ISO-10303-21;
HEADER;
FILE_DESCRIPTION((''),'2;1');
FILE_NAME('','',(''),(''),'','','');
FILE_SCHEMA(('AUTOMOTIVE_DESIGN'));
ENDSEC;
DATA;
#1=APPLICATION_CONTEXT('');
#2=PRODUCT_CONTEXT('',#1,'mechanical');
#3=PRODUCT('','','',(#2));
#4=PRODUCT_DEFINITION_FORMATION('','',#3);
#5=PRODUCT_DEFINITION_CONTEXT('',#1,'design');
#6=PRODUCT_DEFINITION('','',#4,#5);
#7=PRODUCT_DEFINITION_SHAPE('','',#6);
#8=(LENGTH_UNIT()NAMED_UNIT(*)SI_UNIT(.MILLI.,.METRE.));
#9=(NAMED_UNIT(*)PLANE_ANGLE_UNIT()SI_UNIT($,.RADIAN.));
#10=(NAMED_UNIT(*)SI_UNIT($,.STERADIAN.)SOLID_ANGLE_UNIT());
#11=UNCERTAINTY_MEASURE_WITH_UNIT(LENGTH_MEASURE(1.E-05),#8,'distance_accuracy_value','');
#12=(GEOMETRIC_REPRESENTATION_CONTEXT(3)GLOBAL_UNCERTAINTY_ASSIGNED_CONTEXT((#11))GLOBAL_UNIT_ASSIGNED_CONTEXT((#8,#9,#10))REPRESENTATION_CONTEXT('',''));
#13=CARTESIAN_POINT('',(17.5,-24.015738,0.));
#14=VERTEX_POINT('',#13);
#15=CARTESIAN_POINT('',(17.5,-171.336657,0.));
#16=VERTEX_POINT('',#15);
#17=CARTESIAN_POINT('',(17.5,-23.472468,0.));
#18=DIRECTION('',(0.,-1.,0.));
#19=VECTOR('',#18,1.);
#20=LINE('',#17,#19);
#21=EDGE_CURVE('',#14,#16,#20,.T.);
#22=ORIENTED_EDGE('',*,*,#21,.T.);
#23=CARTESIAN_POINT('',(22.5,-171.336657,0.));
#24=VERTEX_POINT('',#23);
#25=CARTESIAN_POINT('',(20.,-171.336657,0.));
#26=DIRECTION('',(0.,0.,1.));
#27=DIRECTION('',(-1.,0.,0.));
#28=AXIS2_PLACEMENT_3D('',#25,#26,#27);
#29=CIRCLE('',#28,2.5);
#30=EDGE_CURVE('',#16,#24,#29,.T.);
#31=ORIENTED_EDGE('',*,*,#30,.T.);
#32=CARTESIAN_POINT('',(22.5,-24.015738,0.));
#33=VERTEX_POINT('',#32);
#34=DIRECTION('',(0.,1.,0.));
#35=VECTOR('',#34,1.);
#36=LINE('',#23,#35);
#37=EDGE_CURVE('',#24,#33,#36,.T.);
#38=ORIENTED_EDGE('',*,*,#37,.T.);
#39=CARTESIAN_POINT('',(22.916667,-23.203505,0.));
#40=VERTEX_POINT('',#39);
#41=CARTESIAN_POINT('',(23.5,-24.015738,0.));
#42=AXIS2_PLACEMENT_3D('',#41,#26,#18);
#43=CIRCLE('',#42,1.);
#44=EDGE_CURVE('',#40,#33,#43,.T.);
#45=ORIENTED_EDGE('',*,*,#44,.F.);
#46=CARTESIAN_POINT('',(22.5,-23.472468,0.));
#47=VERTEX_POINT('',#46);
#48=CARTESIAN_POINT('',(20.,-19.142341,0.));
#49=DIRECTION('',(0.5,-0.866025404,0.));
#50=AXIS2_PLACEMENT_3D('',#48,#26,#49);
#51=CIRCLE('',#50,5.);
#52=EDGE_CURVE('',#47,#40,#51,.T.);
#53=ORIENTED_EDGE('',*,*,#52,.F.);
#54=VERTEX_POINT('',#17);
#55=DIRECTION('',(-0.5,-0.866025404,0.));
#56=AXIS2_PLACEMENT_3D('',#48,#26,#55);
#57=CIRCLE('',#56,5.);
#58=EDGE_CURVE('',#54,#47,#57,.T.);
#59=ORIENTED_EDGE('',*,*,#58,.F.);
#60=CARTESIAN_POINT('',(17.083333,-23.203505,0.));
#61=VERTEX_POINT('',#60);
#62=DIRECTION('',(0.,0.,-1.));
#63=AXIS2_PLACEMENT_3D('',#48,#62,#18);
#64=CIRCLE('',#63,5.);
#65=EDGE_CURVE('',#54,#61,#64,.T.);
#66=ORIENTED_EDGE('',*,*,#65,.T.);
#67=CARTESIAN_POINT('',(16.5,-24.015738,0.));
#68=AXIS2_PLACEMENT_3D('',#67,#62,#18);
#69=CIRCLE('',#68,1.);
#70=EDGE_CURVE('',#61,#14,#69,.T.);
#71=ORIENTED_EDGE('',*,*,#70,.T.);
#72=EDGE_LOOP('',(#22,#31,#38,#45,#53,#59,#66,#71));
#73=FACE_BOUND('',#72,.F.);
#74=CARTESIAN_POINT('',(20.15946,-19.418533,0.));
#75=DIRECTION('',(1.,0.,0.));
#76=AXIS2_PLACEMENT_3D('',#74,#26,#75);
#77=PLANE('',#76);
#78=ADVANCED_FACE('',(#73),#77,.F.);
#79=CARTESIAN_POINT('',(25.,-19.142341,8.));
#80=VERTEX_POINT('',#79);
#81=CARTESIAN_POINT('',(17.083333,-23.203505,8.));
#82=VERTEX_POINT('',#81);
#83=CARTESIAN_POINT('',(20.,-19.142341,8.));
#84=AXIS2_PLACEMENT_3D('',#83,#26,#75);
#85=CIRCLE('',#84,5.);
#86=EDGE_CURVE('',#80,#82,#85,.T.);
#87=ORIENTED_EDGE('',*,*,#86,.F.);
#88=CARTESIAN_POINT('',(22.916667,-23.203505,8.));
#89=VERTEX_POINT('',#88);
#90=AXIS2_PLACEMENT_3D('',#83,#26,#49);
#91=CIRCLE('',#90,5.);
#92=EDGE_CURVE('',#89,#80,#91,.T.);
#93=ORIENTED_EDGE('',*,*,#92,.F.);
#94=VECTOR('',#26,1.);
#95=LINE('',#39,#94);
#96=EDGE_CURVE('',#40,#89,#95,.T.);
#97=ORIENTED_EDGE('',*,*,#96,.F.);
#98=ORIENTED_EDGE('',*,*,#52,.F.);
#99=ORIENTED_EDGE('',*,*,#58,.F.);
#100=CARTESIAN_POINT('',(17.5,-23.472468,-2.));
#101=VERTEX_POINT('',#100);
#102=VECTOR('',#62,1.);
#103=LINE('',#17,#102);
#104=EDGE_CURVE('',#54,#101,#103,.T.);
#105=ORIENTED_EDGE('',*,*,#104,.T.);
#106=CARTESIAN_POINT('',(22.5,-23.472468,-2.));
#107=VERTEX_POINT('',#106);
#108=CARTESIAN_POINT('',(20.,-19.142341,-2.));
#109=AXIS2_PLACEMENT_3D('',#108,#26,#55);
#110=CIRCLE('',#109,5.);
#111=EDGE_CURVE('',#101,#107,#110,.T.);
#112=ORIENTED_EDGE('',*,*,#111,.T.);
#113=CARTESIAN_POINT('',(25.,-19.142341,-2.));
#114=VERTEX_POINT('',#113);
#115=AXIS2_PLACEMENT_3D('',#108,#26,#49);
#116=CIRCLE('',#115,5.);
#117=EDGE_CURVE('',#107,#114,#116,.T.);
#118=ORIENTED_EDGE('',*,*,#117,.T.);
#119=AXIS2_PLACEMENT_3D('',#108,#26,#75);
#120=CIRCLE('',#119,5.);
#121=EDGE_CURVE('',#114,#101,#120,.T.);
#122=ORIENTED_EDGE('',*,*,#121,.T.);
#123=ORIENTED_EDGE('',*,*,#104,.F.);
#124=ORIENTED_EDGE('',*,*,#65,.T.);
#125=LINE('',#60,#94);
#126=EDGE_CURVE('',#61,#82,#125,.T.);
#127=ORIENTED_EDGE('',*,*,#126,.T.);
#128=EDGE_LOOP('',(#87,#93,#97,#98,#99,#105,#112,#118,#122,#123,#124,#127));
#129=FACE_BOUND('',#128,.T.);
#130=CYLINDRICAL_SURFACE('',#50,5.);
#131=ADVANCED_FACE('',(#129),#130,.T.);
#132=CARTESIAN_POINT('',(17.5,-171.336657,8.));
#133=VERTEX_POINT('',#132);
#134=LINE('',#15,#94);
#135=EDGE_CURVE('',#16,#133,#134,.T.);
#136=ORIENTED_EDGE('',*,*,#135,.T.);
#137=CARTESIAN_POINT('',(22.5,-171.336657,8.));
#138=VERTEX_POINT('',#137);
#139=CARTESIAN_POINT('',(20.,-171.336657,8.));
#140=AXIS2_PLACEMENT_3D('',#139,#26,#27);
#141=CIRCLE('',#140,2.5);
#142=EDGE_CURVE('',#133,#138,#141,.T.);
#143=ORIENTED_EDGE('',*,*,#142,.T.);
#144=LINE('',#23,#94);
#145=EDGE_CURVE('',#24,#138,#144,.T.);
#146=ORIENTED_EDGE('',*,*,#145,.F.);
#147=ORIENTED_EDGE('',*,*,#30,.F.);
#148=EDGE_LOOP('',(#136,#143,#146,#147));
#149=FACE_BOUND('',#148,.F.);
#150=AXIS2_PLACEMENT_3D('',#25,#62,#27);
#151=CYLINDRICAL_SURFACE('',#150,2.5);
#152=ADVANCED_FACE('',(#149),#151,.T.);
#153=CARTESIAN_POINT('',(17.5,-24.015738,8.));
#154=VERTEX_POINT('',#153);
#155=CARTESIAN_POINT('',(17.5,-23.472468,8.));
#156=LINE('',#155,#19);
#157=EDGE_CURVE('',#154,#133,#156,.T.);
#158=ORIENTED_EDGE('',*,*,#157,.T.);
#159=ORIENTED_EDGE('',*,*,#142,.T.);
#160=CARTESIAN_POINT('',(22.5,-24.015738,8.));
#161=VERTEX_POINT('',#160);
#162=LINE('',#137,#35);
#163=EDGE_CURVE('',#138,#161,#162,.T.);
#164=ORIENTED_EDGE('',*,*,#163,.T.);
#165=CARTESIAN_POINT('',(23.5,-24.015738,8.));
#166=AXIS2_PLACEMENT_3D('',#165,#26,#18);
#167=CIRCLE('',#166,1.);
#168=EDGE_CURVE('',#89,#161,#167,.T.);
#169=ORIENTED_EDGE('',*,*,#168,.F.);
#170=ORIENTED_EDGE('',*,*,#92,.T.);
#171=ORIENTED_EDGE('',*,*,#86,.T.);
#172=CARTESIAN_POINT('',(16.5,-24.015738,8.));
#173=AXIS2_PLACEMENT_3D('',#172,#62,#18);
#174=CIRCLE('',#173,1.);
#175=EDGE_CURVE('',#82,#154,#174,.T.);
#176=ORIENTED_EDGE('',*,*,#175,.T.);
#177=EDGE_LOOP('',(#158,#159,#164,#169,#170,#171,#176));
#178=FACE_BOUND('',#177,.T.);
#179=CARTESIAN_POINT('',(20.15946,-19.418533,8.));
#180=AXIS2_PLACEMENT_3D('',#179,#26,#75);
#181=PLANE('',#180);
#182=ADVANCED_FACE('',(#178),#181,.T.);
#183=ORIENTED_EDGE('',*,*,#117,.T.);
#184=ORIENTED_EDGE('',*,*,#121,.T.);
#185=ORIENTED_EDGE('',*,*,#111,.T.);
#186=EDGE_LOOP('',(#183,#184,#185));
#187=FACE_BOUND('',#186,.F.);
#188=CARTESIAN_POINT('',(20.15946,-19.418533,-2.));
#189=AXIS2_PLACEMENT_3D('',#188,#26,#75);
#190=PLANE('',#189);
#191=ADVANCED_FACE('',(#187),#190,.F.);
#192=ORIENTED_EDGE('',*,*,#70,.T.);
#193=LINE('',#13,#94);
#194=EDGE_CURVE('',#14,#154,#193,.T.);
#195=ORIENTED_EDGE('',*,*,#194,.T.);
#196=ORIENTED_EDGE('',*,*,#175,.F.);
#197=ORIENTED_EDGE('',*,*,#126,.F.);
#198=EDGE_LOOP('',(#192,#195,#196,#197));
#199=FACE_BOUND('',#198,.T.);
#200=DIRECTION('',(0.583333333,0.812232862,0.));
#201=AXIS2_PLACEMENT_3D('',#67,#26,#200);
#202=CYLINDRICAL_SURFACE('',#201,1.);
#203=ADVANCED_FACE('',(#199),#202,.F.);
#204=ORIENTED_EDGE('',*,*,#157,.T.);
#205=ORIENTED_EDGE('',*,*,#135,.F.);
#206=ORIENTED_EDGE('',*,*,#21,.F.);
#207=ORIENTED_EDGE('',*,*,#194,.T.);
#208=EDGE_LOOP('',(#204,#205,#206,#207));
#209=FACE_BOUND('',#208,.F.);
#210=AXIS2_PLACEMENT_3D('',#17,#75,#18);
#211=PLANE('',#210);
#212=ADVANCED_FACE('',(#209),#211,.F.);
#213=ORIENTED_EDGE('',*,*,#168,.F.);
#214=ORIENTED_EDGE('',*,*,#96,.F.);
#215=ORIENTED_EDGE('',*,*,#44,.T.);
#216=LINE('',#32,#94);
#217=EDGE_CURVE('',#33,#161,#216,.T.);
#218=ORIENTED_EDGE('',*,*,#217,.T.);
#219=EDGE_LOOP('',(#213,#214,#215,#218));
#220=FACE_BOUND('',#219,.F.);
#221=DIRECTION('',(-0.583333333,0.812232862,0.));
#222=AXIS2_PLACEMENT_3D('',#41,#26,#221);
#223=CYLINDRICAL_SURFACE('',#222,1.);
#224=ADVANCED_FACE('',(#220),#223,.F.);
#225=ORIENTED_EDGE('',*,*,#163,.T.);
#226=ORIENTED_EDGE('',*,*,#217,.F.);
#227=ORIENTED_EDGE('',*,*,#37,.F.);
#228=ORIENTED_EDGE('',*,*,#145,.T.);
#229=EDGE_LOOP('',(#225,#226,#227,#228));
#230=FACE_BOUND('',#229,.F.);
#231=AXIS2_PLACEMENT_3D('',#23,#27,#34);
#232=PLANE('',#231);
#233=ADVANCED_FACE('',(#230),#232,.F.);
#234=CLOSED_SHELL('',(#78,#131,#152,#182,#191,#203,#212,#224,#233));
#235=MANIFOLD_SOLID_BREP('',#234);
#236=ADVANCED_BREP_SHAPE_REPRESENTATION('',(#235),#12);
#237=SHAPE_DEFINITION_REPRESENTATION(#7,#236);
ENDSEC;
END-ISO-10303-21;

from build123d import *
from build123d import SkipClean  # not in build123d's __all__

# Parameters (mm, degrees)
F1_DEPTH = 8
F2_DEPTH = 2
F3_R     = 1


with BuildPart() as f1:
    # F0 (on Top) → F1 (new body)
    with BuildSketch(Plane.XY):
        with BuildLine():
            ThreePointArc((17.5, -23.4724675501), (20, -24.1423405312), (22.5, -23.4724675501))
            ThreePointArc((22.5, -23.4724675501), (24.3301270189, -21.6423405312), (25, -19.1423405312))
            ThreePointArc((25, -19.1423405312), (17.5, -14.8122135123), (17.5, -23.4724675501))
        make_face()
        with BuildLine():
            ThreePointArc((17.5, -46.837484988), (20.0298455202, -45.8127197232), (22.5, -44.6514277487))
            Line((22.5, -44.6514277487), (22.5, -40.3887360535))
            Line((22.5, -40.3887360535), (22.5, -23.4724675501))
            ThreePointArc((22.5, -23.4724675501), (20, -24.1423405312), (17.5, -23.4724675501))
            Line((17.5, -23.4724675501), (17.5, -46.837484988))
        make_face()
        with BuildLine():
            Line((22.5, -171.3366569068), (22.5, -44.6514277487))
            ThreePointArc((22.5, -44.6514277487), (20.0298455202, -45.8127197232), (17.5, -46.837484988))
            Line((17.5, -46.837484988), (17.5, -171.3366569068))
            Line((17.5, -171.3366569068), (22.5, -171.3366569068))
        make_face()
        with BuildLine():
            ThreePointArc((17.5, -171.3366569068), (20, -173.8366569068), (22.5, -171.3366569068))
            Line((22.5, -171.3366569068), (17.5, -171.3366569068))
        make_face()
    extrude(amount=F1_DEPTH)

    # F0 (on Top) → F2 (join)
    with BuildSketch(Plane.XY):
        with BuildLine():
            ThreePointArc((17.5, -23.4724675501), (20, -24.1423405312), (22.5, -23.4724675501))
            ThreePointArc((22.5, -23.4724675501), (24.3301270189, -21.6423405312), (25, -19.1423405312))
            ThreePointArc((25, -19.1423405312), (17.5, -14.8122135123), (17.5, -23.4724675501))
        make_face()
    with SkipClean():  # cleaning this boolean's faces spoils the solid; the shape is the same uncleaned
        extrude(amount=-F2_DEPTH)

    # F3#2 (call 1 of 2: OpenCascade refuses the feature's edges together)
    f3_2_edges = [f1.edges().sort_by_distance(p)[0] for p in [
        (22.5, -23.472468, 4),
    ]]
    fillet(f3_2_edges, radius=F3_R)

    # F3 (call 2 of 2)
    f3_edges = [f1.edges().sort_by_distance(p)[0] for p in [
        (17.5, -23.472468, 4),
    ]]
    fillet(f3_edges, radius=F3_R)


solid = f1.part
